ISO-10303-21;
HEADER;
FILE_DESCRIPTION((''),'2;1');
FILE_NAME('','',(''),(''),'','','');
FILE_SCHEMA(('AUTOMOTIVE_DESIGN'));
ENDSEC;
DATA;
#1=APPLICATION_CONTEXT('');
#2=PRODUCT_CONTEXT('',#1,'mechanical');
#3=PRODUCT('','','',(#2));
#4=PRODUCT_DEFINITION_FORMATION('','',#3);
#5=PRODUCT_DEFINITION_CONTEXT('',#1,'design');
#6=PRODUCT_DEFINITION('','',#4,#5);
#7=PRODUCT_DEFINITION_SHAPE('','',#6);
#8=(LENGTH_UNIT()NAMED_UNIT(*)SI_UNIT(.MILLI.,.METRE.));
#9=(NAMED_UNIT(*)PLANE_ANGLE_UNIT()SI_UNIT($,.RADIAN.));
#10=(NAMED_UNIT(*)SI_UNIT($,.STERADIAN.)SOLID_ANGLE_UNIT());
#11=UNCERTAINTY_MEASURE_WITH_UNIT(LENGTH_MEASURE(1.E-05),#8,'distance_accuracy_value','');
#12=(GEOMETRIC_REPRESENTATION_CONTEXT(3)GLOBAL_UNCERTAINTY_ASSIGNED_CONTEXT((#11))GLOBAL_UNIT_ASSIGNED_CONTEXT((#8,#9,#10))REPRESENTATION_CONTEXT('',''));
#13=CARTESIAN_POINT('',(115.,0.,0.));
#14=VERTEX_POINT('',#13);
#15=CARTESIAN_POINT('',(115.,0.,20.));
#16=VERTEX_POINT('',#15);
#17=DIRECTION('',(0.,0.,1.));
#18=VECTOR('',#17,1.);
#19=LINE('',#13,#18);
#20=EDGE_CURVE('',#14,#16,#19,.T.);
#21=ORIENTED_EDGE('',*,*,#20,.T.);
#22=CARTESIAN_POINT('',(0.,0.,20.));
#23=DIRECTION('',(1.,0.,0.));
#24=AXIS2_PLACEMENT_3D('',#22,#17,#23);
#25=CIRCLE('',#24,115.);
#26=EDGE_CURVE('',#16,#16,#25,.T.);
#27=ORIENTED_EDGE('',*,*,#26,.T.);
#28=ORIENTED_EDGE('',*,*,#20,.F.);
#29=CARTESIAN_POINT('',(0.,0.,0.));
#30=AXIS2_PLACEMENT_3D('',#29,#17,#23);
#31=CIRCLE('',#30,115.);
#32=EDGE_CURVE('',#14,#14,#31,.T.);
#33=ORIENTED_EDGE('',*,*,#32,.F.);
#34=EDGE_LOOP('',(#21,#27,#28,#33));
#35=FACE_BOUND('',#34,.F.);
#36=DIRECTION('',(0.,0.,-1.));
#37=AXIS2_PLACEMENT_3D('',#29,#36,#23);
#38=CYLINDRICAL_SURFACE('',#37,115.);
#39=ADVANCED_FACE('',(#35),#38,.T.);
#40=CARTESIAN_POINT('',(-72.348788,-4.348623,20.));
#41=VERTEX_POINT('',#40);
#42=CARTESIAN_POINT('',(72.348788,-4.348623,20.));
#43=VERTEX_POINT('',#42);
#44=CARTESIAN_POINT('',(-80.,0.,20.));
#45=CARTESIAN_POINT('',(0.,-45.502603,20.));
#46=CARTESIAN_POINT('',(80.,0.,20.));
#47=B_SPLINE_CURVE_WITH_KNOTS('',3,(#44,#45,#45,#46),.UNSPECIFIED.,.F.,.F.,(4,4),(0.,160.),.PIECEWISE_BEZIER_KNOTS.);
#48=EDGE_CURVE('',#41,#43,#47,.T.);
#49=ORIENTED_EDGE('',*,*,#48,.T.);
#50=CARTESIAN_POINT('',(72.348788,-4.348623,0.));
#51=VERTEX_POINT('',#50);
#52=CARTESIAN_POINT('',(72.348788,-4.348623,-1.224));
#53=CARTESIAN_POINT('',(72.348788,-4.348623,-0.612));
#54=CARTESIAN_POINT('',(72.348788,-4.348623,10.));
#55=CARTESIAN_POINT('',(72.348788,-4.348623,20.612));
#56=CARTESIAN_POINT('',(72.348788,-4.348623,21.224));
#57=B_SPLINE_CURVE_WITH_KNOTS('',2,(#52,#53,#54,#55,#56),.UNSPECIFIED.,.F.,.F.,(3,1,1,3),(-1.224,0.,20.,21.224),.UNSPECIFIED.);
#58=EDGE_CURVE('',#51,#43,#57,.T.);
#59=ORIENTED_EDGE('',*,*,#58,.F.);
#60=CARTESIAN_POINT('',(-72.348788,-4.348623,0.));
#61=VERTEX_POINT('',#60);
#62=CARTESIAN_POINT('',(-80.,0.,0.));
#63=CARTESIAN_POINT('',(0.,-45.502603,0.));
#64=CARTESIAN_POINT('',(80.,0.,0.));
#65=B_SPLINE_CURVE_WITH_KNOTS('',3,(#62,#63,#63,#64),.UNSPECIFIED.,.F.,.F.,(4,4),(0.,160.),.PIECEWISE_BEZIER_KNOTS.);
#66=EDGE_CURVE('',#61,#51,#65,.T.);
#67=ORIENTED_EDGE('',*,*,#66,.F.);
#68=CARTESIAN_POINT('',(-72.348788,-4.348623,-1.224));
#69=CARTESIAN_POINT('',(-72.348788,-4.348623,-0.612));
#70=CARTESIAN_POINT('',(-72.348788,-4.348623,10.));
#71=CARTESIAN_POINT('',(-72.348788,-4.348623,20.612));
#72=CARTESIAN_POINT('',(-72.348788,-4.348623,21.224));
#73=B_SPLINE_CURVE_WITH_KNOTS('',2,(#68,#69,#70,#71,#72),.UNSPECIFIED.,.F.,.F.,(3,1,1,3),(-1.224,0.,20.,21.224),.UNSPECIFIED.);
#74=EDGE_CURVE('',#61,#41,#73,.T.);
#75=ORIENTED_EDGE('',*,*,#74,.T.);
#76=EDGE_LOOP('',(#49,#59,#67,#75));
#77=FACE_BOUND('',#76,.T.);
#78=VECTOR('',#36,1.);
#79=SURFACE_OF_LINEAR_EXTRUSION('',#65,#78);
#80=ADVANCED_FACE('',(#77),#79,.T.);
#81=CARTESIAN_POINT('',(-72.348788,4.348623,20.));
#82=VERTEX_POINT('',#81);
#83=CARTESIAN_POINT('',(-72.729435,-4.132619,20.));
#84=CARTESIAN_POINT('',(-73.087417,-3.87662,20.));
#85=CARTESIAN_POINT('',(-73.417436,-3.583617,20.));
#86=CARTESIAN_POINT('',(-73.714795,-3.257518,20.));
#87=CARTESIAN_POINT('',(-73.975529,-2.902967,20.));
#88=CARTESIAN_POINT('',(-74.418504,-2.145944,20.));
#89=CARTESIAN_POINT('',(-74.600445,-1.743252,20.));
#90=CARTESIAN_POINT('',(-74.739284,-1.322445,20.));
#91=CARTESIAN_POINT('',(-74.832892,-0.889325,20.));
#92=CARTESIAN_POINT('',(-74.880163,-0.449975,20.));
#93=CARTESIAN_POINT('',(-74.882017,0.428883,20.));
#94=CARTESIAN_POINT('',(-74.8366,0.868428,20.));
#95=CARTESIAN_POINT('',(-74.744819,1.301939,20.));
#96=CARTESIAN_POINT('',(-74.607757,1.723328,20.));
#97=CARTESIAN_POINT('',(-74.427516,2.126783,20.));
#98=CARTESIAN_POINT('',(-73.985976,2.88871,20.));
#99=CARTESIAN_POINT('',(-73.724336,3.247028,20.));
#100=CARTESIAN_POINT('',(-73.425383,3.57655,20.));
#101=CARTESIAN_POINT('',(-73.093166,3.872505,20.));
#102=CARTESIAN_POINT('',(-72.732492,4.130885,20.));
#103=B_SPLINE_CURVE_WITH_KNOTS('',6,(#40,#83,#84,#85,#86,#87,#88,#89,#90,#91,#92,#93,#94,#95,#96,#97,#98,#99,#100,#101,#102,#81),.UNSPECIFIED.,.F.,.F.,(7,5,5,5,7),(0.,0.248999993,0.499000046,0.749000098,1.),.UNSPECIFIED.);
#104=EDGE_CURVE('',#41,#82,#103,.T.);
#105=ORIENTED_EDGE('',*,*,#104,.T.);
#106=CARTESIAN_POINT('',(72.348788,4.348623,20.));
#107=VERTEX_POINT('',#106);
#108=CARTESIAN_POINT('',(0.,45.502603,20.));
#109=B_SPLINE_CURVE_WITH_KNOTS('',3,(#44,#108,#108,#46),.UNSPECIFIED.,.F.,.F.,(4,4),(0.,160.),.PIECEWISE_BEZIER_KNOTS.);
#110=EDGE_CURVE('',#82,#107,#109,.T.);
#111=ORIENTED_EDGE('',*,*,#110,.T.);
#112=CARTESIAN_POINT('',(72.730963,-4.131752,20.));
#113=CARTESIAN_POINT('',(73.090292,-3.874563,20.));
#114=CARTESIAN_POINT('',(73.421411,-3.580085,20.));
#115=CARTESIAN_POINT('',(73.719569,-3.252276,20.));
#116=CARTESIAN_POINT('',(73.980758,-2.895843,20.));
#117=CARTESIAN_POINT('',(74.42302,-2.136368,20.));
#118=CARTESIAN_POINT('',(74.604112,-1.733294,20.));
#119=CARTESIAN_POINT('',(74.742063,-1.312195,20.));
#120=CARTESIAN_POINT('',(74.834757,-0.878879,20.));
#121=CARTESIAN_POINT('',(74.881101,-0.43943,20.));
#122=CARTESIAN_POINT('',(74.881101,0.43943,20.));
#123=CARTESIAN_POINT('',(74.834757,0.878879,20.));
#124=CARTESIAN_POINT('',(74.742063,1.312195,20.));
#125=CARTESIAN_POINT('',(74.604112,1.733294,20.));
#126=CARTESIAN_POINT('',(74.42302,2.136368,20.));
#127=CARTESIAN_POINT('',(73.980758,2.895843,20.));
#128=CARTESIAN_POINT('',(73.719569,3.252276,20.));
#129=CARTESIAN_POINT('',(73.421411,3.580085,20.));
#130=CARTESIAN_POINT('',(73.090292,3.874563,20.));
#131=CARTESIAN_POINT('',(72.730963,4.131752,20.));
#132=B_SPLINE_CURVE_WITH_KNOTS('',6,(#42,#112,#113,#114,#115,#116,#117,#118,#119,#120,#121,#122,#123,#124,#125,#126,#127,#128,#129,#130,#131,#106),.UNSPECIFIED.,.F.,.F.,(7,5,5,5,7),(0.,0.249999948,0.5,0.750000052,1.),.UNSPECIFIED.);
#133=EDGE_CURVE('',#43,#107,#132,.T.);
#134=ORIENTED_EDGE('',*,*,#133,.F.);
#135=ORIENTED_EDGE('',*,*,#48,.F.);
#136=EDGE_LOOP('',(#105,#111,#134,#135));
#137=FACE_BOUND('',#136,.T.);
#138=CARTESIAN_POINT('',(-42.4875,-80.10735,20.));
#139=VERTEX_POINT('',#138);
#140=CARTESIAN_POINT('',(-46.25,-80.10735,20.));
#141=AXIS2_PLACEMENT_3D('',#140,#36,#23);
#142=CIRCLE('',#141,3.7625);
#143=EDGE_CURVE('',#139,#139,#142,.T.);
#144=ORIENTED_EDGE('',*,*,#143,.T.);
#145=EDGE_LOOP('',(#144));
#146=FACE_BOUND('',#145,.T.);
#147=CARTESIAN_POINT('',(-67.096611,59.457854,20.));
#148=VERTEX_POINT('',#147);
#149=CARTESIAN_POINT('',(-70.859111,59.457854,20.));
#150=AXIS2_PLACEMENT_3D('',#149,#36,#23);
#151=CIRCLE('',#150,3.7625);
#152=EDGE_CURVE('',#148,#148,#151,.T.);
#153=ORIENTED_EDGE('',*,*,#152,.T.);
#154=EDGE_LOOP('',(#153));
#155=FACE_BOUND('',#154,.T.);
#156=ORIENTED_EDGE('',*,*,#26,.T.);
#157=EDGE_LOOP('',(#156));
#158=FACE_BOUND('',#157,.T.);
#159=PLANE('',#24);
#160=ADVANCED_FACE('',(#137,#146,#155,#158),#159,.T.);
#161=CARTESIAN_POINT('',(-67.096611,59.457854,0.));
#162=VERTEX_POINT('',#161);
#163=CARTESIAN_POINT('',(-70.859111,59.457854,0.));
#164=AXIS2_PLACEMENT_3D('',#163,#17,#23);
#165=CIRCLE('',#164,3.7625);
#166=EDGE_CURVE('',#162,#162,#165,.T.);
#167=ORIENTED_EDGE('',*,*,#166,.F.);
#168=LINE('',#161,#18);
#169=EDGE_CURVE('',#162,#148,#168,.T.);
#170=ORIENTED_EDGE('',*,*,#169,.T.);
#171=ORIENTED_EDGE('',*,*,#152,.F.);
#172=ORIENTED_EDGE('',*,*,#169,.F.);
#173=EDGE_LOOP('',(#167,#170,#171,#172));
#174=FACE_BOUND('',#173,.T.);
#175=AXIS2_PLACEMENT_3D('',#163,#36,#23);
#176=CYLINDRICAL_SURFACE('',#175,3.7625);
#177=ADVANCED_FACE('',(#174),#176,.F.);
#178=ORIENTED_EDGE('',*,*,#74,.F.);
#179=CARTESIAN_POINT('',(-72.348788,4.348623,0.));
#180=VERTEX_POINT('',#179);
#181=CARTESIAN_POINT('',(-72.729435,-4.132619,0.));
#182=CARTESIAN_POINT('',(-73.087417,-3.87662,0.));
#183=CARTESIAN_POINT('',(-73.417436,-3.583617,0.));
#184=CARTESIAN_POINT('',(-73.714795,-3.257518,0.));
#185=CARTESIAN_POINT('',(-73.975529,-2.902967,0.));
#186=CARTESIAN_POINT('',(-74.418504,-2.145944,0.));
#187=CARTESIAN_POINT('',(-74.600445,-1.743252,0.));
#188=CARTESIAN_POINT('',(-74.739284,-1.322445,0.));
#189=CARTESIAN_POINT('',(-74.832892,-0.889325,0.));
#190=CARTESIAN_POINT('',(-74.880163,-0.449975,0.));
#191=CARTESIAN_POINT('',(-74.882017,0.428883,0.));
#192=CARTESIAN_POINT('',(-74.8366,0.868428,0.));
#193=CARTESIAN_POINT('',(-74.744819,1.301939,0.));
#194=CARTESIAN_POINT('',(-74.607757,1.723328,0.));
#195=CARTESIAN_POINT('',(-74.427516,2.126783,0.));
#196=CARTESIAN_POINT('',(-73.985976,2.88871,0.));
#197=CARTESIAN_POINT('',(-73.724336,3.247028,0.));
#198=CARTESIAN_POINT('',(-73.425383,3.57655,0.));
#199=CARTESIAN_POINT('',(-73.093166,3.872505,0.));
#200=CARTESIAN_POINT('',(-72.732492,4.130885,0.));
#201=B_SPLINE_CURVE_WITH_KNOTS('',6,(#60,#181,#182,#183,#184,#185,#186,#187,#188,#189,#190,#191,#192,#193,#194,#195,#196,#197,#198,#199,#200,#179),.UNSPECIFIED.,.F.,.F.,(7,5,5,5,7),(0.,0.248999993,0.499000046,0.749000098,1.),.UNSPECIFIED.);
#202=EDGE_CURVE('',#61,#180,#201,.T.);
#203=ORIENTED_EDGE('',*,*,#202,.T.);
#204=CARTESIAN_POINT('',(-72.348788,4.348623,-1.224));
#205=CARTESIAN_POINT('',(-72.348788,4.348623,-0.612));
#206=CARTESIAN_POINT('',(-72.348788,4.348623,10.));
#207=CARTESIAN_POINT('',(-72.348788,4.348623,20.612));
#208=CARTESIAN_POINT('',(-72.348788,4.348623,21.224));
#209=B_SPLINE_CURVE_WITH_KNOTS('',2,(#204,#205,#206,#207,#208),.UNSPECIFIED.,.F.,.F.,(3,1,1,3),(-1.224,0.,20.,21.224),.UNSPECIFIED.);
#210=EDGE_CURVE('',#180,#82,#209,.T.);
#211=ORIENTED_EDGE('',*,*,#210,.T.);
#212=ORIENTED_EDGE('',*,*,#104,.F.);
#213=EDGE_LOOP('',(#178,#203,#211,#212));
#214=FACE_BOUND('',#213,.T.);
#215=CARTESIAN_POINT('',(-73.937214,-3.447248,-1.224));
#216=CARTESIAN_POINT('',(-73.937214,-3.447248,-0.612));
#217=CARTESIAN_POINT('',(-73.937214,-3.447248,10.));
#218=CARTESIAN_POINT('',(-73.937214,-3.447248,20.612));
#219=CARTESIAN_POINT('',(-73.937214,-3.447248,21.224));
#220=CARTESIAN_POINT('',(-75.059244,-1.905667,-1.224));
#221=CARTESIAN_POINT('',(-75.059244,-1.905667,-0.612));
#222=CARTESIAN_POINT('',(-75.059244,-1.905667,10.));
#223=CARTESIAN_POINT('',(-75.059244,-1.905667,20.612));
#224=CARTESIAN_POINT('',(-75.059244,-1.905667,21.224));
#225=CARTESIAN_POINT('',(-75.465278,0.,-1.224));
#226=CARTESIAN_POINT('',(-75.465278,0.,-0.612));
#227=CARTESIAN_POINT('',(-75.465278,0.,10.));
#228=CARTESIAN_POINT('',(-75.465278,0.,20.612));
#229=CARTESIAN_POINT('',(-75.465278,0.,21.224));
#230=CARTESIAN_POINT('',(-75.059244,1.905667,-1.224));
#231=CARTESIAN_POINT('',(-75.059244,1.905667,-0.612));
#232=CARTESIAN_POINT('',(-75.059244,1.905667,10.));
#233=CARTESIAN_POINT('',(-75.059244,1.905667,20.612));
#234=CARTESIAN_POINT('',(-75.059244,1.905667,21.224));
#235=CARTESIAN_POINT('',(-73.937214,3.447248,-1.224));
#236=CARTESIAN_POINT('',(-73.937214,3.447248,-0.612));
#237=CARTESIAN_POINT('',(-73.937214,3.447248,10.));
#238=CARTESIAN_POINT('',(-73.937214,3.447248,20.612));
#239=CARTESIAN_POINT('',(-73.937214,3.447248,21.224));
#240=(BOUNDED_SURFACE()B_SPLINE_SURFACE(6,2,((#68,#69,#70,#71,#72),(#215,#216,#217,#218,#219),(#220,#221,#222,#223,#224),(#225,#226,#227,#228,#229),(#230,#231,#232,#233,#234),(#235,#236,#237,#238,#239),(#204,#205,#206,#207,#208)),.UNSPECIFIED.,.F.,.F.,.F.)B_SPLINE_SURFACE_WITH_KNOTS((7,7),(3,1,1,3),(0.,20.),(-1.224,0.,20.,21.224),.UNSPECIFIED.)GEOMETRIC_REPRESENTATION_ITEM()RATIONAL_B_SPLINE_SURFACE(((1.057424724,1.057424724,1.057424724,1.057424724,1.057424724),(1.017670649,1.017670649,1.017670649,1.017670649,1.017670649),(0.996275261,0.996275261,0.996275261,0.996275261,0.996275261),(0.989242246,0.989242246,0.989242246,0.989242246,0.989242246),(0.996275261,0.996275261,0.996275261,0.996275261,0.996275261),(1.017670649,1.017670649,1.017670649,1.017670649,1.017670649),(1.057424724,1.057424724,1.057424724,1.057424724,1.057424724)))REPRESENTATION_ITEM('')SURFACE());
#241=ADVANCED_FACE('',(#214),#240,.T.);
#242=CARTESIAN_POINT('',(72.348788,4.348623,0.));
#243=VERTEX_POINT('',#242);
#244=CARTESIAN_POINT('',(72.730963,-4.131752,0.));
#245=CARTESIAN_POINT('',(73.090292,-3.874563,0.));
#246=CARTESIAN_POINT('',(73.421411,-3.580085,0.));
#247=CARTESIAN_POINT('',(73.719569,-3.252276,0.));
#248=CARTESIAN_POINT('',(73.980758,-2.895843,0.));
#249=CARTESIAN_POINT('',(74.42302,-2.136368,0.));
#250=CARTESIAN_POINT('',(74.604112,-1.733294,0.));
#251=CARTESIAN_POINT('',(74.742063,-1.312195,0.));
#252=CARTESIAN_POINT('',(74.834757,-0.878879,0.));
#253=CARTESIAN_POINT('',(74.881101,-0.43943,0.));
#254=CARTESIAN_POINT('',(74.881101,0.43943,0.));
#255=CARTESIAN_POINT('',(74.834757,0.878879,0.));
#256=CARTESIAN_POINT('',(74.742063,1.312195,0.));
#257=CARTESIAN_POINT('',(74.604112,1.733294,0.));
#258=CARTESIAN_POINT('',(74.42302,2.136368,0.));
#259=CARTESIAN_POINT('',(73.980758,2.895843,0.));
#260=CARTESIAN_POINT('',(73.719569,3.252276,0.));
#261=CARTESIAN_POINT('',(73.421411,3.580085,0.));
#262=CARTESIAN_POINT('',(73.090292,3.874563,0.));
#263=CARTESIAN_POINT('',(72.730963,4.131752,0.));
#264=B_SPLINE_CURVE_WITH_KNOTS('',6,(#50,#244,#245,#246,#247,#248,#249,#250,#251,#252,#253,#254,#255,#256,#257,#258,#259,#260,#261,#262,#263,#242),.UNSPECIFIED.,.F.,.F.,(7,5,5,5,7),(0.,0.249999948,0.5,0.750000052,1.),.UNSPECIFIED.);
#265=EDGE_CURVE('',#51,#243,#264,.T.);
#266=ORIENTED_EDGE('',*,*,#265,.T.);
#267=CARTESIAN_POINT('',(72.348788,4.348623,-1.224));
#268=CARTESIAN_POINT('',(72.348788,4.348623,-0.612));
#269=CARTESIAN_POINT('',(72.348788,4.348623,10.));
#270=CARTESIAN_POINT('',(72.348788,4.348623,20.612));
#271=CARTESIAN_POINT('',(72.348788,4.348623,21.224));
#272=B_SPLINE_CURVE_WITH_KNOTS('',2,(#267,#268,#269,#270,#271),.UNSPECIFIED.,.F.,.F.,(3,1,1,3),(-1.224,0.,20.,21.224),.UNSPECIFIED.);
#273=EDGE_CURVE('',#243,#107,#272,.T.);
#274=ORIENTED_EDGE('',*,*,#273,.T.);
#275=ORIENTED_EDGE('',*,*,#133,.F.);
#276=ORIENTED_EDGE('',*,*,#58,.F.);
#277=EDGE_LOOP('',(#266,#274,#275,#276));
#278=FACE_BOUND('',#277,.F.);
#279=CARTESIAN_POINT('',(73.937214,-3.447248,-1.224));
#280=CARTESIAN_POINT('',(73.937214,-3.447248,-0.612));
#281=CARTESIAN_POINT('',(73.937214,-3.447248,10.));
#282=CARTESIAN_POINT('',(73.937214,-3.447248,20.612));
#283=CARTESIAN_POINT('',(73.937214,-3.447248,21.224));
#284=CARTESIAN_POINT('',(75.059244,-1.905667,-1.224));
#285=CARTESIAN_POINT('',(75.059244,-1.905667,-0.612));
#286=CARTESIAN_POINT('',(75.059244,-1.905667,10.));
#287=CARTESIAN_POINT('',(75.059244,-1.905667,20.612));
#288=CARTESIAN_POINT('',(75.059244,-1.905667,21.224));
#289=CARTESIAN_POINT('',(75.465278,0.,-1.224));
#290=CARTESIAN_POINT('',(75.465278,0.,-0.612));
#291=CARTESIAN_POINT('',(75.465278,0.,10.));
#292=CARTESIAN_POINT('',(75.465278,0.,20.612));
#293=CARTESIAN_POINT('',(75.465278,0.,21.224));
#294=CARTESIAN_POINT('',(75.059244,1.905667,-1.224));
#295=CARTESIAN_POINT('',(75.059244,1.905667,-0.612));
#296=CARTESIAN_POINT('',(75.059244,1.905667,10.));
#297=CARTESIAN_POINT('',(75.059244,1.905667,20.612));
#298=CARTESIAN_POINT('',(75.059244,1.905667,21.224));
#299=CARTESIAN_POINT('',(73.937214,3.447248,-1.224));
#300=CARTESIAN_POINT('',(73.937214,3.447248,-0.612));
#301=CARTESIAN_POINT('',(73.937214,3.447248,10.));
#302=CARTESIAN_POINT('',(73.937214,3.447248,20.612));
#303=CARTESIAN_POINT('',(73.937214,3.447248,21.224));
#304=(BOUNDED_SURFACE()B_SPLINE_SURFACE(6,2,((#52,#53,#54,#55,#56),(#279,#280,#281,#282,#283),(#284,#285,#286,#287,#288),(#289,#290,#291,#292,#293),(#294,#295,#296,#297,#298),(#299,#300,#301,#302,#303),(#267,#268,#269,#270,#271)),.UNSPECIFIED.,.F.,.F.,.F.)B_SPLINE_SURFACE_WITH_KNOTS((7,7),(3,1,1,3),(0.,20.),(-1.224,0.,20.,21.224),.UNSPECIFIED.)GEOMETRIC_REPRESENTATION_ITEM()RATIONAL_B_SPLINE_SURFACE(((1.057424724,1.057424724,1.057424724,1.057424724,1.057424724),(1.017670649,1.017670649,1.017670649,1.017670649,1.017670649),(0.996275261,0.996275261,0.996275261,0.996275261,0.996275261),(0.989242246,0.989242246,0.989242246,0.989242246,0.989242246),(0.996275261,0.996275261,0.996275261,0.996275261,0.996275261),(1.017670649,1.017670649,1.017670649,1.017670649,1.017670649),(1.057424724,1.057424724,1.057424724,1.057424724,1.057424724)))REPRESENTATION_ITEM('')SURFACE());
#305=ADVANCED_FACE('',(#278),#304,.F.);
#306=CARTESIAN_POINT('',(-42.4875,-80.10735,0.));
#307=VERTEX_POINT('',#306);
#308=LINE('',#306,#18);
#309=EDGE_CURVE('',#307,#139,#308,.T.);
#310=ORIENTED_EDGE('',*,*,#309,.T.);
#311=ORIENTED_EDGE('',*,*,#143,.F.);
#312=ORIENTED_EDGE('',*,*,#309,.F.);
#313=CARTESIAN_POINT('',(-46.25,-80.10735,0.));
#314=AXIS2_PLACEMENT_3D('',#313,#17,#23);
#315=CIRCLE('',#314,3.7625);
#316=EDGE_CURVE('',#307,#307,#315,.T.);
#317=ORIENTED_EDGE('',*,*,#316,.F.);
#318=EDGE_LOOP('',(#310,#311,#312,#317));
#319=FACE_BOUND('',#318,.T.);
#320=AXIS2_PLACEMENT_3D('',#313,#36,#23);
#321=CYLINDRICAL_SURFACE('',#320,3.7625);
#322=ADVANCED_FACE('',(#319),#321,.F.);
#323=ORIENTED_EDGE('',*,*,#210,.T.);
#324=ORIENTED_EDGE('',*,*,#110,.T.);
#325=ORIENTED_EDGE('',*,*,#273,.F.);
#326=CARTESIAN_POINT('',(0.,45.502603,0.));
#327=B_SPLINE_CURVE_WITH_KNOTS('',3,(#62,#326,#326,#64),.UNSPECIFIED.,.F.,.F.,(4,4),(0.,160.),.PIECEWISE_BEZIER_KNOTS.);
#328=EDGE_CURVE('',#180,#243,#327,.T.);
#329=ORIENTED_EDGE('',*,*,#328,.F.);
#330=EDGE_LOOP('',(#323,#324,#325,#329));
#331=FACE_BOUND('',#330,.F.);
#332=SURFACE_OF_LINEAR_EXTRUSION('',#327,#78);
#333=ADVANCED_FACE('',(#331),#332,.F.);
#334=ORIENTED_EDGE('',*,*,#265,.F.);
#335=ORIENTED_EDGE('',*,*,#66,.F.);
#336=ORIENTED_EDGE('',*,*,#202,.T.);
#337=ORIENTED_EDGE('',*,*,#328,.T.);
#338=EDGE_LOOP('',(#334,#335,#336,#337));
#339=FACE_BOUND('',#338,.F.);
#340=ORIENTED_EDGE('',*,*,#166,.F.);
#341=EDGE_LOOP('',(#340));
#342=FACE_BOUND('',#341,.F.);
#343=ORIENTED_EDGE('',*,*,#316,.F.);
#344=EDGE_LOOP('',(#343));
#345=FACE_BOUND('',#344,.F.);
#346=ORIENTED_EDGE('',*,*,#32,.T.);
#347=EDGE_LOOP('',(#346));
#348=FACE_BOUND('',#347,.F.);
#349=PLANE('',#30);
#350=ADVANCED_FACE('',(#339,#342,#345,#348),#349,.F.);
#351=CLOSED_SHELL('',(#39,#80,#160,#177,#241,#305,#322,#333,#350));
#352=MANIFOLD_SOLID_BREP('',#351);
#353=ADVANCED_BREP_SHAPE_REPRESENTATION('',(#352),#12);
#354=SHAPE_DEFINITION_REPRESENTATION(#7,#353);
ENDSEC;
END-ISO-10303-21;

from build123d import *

# Parameters (mm, degrees)
F0_R     = 115
F1_DEPTH = 20
F2_R     = 5
F3_R     = 3.7625
F4_DEPTH = 25


with BuildPart() as f1:
    # F0 (on Top) → F1 (new body)
    with BuildSketch(Plane.XY):
        Circle(F0_R)
        with BuildLine():
            add(Edge.make_bspline(
                [(-80, 0), (0, -45.502603054), (0, -45.502603054), (80, 0)],
                knots=[0, 0, 0, 0, 160, 160, 160, 160], degree=3))
            add(Edge.make_bspline(
                [(-80, 0), (0, 45.502603054), (0, 45.502603054), (80, 0)],
                knots=[0, 0, 0, 0, 160, 160, 160, 160], degree=3))
        make_face(mode=Mode.SUBTRACT)
    extrude(amount=F1_DEPTH)

    # F2
    f2_edges = [f1.edges().sort_by_distance(p)[0] for p in [
        (-80, 0, 10),
        (80, 0, 10),
    ]]
    fillet(f2_edges, radius=F2_R)

    # F3 (on Top) → F4 (cut)
    with BuildSketch(Plane.XY):
        with Locations((-70.8591109885, 59.457853896)):
            Circle(F3_R)
        with Locations((-46.25, -80.1073498501)):
            Circle(F3_R)
    extrude(amount=F4_DEPTH, mode=Mode.SUBTRACT)


solid = f1.part
